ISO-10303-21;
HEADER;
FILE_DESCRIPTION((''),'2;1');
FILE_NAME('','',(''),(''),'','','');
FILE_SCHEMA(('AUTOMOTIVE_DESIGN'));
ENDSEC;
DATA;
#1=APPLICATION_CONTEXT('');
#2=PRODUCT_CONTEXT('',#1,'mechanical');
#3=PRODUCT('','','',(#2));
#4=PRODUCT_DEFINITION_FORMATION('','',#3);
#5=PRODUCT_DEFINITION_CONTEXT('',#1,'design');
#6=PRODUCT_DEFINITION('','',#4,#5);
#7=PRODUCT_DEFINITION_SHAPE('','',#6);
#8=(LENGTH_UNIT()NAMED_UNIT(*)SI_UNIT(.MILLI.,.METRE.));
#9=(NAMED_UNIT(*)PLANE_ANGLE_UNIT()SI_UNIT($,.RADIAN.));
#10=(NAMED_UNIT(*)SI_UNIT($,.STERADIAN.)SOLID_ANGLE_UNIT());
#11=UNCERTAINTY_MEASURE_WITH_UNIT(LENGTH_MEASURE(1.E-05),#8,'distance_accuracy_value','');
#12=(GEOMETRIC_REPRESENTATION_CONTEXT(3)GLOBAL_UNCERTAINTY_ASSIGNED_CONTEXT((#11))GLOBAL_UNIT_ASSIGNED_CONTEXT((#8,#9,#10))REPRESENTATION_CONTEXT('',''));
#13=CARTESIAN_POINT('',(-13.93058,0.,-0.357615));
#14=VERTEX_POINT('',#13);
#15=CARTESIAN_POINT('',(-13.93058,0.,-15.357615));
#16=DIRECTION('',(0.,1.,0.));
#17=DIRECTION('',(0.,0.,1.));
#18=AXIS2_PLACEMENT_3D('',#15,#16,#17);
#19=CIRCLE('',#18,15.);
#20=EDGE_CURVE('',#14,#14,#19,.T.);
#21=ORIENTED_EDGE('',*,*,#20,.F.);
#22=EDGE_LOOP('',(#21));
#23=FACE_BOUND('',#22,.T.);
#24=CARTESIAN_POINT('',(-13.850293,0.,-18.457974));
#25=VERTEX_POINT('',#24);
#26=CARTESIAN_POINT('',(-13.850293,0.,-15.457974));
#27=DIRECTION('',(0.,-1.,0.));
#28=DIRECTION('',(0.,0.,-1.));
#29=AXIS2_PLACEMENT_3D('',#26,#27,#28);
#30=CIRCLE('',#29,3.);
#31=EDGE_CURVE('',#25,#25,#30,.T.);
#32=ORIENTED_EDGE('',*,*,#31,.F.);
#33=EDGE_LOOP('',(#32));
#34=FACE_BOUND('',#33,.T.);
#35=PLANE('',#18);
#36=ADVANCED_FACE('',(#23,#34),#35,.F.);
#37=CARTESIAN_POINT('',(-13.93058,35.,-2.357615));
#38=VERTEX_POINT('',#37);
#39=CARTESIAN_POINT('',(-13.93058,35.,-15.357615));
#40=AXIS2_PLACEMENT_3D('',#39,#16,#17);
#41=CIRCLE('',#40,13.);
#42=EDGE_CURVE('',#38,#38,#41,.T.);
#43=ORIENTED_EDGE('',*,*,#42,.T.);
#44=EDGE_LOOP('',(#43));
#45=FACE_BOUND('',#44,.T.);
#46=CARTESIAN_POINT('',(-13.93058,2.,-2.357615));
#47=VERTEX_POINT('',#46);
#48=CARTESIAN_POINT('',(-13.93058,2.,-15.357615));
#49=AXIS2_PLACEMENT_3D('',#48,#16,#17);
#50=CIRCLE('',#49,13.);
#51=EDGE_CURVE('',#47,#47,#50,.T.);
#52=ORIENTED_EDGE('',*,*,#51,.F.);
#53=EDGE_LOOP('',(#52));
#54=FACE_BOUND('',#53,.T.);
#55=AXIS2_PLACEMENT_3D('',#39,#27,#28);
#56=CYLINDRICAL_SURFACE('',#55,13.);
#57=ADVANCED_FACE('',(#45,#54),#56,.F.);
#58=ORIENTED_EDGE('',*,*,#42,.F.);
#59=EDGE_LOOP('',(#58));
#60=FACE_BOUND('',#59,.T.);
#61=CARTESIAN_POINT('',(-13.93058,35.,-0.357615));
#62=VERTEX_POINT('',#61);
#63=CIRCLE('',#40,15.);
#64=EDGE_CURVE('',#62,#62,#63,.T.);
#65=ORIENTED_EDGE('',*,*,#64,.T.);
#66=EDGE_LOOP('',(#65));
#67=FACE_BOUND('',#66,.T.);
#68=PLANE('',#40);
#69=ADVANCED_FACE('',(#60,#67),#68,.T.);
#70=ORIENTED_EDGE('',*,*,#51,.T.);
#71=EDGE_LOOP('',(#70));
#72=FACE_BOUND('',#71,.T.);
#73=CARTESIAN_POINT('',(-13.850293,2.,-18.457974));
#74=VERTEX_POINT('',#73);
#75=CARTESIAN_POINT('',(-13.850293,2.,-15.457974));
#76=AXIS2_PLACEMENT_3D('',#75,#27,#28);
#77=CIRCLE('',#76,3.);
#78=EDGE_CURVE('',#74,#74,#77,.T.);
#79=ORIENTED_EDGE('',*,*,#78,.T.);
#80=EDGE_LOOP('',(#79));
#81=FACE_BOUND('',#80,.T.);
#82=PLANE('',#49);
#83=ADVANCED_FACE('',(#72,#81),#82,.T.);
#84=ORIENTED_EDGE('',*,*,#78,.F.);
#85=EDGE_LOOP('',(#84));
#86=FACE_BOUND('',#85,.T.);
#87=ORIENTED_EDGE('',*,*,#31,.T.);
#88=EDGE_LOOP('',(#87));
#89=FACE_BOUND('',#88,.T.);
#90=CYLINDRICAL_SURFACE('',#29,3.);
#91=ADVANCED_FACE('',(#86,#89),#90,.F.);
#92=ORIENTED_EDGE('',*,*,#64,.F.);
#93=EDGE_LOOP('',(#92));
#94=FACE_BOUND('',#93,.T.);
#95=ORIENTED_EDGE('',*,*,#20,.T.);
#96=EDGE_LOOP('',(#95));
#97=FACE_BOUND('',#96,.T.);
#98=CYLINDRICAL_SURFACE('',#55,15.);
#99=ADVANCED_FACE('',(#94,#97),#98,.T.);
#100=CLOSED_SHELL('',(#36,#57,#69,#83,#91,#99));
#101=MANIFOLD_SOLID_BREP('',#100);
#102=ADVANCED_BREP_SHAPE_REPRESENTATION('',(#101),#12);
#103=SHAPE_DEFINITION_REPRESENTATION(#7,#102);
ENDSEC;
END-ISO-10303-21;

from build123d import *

# Parameters (mm, degrees)
SKETCH1_R               = 15
BOSS_EXTRUDE1_DEPTH     = 35
SHELL1_T                = -2
ADVANCEDHOLE1_OUTLINE_R = 3
ADVANCEDHOLE1_DEPTH     = 2


# Read off the part's stored shape, not the designer's step: AdvancedHole1
with BuildPart() as part:
    # Sketch1 → Boss-Extrude1 (new body)
    with BuildSketch(Plane(origin=(0, 0, 0), x_dir=(1, 0, 0), z_dir=(0, 1, 0))):
        with Locations(Location((-13.930579922, 15.357614938, 0), (0, 0, 270))):
            Circle(SKETCH1_R)
    extrude(amount=BOSS_EXTRUDE1_DEPTH)

    # Shell1
    shell1_openings = [part.faces().sort_by_distance(p)[0] for p in [
        (-13.930579922, 35, -15.357614938),
    ]]
    offset(amount=SHELL1_T, openings=shell1_openings, kind=Kind.INTERSECTION)

    # AdvancedHole1 outline → AdvancedHole1 (cut)
    with BuildSketch(Plane(origin=(0, 0, 0), x_dir=(1, 0, 0), z_dir=(0, 1, 0))):
        with Locations((-13.850292644, 15.457974035)):
            Circle(ADVANCEDHOLE1_OUTLINE_R)
    extrude(amount=ADVANCEDHOLE1_DEPTH, mode=Mode.SUBTRACT)


solid = part.part
